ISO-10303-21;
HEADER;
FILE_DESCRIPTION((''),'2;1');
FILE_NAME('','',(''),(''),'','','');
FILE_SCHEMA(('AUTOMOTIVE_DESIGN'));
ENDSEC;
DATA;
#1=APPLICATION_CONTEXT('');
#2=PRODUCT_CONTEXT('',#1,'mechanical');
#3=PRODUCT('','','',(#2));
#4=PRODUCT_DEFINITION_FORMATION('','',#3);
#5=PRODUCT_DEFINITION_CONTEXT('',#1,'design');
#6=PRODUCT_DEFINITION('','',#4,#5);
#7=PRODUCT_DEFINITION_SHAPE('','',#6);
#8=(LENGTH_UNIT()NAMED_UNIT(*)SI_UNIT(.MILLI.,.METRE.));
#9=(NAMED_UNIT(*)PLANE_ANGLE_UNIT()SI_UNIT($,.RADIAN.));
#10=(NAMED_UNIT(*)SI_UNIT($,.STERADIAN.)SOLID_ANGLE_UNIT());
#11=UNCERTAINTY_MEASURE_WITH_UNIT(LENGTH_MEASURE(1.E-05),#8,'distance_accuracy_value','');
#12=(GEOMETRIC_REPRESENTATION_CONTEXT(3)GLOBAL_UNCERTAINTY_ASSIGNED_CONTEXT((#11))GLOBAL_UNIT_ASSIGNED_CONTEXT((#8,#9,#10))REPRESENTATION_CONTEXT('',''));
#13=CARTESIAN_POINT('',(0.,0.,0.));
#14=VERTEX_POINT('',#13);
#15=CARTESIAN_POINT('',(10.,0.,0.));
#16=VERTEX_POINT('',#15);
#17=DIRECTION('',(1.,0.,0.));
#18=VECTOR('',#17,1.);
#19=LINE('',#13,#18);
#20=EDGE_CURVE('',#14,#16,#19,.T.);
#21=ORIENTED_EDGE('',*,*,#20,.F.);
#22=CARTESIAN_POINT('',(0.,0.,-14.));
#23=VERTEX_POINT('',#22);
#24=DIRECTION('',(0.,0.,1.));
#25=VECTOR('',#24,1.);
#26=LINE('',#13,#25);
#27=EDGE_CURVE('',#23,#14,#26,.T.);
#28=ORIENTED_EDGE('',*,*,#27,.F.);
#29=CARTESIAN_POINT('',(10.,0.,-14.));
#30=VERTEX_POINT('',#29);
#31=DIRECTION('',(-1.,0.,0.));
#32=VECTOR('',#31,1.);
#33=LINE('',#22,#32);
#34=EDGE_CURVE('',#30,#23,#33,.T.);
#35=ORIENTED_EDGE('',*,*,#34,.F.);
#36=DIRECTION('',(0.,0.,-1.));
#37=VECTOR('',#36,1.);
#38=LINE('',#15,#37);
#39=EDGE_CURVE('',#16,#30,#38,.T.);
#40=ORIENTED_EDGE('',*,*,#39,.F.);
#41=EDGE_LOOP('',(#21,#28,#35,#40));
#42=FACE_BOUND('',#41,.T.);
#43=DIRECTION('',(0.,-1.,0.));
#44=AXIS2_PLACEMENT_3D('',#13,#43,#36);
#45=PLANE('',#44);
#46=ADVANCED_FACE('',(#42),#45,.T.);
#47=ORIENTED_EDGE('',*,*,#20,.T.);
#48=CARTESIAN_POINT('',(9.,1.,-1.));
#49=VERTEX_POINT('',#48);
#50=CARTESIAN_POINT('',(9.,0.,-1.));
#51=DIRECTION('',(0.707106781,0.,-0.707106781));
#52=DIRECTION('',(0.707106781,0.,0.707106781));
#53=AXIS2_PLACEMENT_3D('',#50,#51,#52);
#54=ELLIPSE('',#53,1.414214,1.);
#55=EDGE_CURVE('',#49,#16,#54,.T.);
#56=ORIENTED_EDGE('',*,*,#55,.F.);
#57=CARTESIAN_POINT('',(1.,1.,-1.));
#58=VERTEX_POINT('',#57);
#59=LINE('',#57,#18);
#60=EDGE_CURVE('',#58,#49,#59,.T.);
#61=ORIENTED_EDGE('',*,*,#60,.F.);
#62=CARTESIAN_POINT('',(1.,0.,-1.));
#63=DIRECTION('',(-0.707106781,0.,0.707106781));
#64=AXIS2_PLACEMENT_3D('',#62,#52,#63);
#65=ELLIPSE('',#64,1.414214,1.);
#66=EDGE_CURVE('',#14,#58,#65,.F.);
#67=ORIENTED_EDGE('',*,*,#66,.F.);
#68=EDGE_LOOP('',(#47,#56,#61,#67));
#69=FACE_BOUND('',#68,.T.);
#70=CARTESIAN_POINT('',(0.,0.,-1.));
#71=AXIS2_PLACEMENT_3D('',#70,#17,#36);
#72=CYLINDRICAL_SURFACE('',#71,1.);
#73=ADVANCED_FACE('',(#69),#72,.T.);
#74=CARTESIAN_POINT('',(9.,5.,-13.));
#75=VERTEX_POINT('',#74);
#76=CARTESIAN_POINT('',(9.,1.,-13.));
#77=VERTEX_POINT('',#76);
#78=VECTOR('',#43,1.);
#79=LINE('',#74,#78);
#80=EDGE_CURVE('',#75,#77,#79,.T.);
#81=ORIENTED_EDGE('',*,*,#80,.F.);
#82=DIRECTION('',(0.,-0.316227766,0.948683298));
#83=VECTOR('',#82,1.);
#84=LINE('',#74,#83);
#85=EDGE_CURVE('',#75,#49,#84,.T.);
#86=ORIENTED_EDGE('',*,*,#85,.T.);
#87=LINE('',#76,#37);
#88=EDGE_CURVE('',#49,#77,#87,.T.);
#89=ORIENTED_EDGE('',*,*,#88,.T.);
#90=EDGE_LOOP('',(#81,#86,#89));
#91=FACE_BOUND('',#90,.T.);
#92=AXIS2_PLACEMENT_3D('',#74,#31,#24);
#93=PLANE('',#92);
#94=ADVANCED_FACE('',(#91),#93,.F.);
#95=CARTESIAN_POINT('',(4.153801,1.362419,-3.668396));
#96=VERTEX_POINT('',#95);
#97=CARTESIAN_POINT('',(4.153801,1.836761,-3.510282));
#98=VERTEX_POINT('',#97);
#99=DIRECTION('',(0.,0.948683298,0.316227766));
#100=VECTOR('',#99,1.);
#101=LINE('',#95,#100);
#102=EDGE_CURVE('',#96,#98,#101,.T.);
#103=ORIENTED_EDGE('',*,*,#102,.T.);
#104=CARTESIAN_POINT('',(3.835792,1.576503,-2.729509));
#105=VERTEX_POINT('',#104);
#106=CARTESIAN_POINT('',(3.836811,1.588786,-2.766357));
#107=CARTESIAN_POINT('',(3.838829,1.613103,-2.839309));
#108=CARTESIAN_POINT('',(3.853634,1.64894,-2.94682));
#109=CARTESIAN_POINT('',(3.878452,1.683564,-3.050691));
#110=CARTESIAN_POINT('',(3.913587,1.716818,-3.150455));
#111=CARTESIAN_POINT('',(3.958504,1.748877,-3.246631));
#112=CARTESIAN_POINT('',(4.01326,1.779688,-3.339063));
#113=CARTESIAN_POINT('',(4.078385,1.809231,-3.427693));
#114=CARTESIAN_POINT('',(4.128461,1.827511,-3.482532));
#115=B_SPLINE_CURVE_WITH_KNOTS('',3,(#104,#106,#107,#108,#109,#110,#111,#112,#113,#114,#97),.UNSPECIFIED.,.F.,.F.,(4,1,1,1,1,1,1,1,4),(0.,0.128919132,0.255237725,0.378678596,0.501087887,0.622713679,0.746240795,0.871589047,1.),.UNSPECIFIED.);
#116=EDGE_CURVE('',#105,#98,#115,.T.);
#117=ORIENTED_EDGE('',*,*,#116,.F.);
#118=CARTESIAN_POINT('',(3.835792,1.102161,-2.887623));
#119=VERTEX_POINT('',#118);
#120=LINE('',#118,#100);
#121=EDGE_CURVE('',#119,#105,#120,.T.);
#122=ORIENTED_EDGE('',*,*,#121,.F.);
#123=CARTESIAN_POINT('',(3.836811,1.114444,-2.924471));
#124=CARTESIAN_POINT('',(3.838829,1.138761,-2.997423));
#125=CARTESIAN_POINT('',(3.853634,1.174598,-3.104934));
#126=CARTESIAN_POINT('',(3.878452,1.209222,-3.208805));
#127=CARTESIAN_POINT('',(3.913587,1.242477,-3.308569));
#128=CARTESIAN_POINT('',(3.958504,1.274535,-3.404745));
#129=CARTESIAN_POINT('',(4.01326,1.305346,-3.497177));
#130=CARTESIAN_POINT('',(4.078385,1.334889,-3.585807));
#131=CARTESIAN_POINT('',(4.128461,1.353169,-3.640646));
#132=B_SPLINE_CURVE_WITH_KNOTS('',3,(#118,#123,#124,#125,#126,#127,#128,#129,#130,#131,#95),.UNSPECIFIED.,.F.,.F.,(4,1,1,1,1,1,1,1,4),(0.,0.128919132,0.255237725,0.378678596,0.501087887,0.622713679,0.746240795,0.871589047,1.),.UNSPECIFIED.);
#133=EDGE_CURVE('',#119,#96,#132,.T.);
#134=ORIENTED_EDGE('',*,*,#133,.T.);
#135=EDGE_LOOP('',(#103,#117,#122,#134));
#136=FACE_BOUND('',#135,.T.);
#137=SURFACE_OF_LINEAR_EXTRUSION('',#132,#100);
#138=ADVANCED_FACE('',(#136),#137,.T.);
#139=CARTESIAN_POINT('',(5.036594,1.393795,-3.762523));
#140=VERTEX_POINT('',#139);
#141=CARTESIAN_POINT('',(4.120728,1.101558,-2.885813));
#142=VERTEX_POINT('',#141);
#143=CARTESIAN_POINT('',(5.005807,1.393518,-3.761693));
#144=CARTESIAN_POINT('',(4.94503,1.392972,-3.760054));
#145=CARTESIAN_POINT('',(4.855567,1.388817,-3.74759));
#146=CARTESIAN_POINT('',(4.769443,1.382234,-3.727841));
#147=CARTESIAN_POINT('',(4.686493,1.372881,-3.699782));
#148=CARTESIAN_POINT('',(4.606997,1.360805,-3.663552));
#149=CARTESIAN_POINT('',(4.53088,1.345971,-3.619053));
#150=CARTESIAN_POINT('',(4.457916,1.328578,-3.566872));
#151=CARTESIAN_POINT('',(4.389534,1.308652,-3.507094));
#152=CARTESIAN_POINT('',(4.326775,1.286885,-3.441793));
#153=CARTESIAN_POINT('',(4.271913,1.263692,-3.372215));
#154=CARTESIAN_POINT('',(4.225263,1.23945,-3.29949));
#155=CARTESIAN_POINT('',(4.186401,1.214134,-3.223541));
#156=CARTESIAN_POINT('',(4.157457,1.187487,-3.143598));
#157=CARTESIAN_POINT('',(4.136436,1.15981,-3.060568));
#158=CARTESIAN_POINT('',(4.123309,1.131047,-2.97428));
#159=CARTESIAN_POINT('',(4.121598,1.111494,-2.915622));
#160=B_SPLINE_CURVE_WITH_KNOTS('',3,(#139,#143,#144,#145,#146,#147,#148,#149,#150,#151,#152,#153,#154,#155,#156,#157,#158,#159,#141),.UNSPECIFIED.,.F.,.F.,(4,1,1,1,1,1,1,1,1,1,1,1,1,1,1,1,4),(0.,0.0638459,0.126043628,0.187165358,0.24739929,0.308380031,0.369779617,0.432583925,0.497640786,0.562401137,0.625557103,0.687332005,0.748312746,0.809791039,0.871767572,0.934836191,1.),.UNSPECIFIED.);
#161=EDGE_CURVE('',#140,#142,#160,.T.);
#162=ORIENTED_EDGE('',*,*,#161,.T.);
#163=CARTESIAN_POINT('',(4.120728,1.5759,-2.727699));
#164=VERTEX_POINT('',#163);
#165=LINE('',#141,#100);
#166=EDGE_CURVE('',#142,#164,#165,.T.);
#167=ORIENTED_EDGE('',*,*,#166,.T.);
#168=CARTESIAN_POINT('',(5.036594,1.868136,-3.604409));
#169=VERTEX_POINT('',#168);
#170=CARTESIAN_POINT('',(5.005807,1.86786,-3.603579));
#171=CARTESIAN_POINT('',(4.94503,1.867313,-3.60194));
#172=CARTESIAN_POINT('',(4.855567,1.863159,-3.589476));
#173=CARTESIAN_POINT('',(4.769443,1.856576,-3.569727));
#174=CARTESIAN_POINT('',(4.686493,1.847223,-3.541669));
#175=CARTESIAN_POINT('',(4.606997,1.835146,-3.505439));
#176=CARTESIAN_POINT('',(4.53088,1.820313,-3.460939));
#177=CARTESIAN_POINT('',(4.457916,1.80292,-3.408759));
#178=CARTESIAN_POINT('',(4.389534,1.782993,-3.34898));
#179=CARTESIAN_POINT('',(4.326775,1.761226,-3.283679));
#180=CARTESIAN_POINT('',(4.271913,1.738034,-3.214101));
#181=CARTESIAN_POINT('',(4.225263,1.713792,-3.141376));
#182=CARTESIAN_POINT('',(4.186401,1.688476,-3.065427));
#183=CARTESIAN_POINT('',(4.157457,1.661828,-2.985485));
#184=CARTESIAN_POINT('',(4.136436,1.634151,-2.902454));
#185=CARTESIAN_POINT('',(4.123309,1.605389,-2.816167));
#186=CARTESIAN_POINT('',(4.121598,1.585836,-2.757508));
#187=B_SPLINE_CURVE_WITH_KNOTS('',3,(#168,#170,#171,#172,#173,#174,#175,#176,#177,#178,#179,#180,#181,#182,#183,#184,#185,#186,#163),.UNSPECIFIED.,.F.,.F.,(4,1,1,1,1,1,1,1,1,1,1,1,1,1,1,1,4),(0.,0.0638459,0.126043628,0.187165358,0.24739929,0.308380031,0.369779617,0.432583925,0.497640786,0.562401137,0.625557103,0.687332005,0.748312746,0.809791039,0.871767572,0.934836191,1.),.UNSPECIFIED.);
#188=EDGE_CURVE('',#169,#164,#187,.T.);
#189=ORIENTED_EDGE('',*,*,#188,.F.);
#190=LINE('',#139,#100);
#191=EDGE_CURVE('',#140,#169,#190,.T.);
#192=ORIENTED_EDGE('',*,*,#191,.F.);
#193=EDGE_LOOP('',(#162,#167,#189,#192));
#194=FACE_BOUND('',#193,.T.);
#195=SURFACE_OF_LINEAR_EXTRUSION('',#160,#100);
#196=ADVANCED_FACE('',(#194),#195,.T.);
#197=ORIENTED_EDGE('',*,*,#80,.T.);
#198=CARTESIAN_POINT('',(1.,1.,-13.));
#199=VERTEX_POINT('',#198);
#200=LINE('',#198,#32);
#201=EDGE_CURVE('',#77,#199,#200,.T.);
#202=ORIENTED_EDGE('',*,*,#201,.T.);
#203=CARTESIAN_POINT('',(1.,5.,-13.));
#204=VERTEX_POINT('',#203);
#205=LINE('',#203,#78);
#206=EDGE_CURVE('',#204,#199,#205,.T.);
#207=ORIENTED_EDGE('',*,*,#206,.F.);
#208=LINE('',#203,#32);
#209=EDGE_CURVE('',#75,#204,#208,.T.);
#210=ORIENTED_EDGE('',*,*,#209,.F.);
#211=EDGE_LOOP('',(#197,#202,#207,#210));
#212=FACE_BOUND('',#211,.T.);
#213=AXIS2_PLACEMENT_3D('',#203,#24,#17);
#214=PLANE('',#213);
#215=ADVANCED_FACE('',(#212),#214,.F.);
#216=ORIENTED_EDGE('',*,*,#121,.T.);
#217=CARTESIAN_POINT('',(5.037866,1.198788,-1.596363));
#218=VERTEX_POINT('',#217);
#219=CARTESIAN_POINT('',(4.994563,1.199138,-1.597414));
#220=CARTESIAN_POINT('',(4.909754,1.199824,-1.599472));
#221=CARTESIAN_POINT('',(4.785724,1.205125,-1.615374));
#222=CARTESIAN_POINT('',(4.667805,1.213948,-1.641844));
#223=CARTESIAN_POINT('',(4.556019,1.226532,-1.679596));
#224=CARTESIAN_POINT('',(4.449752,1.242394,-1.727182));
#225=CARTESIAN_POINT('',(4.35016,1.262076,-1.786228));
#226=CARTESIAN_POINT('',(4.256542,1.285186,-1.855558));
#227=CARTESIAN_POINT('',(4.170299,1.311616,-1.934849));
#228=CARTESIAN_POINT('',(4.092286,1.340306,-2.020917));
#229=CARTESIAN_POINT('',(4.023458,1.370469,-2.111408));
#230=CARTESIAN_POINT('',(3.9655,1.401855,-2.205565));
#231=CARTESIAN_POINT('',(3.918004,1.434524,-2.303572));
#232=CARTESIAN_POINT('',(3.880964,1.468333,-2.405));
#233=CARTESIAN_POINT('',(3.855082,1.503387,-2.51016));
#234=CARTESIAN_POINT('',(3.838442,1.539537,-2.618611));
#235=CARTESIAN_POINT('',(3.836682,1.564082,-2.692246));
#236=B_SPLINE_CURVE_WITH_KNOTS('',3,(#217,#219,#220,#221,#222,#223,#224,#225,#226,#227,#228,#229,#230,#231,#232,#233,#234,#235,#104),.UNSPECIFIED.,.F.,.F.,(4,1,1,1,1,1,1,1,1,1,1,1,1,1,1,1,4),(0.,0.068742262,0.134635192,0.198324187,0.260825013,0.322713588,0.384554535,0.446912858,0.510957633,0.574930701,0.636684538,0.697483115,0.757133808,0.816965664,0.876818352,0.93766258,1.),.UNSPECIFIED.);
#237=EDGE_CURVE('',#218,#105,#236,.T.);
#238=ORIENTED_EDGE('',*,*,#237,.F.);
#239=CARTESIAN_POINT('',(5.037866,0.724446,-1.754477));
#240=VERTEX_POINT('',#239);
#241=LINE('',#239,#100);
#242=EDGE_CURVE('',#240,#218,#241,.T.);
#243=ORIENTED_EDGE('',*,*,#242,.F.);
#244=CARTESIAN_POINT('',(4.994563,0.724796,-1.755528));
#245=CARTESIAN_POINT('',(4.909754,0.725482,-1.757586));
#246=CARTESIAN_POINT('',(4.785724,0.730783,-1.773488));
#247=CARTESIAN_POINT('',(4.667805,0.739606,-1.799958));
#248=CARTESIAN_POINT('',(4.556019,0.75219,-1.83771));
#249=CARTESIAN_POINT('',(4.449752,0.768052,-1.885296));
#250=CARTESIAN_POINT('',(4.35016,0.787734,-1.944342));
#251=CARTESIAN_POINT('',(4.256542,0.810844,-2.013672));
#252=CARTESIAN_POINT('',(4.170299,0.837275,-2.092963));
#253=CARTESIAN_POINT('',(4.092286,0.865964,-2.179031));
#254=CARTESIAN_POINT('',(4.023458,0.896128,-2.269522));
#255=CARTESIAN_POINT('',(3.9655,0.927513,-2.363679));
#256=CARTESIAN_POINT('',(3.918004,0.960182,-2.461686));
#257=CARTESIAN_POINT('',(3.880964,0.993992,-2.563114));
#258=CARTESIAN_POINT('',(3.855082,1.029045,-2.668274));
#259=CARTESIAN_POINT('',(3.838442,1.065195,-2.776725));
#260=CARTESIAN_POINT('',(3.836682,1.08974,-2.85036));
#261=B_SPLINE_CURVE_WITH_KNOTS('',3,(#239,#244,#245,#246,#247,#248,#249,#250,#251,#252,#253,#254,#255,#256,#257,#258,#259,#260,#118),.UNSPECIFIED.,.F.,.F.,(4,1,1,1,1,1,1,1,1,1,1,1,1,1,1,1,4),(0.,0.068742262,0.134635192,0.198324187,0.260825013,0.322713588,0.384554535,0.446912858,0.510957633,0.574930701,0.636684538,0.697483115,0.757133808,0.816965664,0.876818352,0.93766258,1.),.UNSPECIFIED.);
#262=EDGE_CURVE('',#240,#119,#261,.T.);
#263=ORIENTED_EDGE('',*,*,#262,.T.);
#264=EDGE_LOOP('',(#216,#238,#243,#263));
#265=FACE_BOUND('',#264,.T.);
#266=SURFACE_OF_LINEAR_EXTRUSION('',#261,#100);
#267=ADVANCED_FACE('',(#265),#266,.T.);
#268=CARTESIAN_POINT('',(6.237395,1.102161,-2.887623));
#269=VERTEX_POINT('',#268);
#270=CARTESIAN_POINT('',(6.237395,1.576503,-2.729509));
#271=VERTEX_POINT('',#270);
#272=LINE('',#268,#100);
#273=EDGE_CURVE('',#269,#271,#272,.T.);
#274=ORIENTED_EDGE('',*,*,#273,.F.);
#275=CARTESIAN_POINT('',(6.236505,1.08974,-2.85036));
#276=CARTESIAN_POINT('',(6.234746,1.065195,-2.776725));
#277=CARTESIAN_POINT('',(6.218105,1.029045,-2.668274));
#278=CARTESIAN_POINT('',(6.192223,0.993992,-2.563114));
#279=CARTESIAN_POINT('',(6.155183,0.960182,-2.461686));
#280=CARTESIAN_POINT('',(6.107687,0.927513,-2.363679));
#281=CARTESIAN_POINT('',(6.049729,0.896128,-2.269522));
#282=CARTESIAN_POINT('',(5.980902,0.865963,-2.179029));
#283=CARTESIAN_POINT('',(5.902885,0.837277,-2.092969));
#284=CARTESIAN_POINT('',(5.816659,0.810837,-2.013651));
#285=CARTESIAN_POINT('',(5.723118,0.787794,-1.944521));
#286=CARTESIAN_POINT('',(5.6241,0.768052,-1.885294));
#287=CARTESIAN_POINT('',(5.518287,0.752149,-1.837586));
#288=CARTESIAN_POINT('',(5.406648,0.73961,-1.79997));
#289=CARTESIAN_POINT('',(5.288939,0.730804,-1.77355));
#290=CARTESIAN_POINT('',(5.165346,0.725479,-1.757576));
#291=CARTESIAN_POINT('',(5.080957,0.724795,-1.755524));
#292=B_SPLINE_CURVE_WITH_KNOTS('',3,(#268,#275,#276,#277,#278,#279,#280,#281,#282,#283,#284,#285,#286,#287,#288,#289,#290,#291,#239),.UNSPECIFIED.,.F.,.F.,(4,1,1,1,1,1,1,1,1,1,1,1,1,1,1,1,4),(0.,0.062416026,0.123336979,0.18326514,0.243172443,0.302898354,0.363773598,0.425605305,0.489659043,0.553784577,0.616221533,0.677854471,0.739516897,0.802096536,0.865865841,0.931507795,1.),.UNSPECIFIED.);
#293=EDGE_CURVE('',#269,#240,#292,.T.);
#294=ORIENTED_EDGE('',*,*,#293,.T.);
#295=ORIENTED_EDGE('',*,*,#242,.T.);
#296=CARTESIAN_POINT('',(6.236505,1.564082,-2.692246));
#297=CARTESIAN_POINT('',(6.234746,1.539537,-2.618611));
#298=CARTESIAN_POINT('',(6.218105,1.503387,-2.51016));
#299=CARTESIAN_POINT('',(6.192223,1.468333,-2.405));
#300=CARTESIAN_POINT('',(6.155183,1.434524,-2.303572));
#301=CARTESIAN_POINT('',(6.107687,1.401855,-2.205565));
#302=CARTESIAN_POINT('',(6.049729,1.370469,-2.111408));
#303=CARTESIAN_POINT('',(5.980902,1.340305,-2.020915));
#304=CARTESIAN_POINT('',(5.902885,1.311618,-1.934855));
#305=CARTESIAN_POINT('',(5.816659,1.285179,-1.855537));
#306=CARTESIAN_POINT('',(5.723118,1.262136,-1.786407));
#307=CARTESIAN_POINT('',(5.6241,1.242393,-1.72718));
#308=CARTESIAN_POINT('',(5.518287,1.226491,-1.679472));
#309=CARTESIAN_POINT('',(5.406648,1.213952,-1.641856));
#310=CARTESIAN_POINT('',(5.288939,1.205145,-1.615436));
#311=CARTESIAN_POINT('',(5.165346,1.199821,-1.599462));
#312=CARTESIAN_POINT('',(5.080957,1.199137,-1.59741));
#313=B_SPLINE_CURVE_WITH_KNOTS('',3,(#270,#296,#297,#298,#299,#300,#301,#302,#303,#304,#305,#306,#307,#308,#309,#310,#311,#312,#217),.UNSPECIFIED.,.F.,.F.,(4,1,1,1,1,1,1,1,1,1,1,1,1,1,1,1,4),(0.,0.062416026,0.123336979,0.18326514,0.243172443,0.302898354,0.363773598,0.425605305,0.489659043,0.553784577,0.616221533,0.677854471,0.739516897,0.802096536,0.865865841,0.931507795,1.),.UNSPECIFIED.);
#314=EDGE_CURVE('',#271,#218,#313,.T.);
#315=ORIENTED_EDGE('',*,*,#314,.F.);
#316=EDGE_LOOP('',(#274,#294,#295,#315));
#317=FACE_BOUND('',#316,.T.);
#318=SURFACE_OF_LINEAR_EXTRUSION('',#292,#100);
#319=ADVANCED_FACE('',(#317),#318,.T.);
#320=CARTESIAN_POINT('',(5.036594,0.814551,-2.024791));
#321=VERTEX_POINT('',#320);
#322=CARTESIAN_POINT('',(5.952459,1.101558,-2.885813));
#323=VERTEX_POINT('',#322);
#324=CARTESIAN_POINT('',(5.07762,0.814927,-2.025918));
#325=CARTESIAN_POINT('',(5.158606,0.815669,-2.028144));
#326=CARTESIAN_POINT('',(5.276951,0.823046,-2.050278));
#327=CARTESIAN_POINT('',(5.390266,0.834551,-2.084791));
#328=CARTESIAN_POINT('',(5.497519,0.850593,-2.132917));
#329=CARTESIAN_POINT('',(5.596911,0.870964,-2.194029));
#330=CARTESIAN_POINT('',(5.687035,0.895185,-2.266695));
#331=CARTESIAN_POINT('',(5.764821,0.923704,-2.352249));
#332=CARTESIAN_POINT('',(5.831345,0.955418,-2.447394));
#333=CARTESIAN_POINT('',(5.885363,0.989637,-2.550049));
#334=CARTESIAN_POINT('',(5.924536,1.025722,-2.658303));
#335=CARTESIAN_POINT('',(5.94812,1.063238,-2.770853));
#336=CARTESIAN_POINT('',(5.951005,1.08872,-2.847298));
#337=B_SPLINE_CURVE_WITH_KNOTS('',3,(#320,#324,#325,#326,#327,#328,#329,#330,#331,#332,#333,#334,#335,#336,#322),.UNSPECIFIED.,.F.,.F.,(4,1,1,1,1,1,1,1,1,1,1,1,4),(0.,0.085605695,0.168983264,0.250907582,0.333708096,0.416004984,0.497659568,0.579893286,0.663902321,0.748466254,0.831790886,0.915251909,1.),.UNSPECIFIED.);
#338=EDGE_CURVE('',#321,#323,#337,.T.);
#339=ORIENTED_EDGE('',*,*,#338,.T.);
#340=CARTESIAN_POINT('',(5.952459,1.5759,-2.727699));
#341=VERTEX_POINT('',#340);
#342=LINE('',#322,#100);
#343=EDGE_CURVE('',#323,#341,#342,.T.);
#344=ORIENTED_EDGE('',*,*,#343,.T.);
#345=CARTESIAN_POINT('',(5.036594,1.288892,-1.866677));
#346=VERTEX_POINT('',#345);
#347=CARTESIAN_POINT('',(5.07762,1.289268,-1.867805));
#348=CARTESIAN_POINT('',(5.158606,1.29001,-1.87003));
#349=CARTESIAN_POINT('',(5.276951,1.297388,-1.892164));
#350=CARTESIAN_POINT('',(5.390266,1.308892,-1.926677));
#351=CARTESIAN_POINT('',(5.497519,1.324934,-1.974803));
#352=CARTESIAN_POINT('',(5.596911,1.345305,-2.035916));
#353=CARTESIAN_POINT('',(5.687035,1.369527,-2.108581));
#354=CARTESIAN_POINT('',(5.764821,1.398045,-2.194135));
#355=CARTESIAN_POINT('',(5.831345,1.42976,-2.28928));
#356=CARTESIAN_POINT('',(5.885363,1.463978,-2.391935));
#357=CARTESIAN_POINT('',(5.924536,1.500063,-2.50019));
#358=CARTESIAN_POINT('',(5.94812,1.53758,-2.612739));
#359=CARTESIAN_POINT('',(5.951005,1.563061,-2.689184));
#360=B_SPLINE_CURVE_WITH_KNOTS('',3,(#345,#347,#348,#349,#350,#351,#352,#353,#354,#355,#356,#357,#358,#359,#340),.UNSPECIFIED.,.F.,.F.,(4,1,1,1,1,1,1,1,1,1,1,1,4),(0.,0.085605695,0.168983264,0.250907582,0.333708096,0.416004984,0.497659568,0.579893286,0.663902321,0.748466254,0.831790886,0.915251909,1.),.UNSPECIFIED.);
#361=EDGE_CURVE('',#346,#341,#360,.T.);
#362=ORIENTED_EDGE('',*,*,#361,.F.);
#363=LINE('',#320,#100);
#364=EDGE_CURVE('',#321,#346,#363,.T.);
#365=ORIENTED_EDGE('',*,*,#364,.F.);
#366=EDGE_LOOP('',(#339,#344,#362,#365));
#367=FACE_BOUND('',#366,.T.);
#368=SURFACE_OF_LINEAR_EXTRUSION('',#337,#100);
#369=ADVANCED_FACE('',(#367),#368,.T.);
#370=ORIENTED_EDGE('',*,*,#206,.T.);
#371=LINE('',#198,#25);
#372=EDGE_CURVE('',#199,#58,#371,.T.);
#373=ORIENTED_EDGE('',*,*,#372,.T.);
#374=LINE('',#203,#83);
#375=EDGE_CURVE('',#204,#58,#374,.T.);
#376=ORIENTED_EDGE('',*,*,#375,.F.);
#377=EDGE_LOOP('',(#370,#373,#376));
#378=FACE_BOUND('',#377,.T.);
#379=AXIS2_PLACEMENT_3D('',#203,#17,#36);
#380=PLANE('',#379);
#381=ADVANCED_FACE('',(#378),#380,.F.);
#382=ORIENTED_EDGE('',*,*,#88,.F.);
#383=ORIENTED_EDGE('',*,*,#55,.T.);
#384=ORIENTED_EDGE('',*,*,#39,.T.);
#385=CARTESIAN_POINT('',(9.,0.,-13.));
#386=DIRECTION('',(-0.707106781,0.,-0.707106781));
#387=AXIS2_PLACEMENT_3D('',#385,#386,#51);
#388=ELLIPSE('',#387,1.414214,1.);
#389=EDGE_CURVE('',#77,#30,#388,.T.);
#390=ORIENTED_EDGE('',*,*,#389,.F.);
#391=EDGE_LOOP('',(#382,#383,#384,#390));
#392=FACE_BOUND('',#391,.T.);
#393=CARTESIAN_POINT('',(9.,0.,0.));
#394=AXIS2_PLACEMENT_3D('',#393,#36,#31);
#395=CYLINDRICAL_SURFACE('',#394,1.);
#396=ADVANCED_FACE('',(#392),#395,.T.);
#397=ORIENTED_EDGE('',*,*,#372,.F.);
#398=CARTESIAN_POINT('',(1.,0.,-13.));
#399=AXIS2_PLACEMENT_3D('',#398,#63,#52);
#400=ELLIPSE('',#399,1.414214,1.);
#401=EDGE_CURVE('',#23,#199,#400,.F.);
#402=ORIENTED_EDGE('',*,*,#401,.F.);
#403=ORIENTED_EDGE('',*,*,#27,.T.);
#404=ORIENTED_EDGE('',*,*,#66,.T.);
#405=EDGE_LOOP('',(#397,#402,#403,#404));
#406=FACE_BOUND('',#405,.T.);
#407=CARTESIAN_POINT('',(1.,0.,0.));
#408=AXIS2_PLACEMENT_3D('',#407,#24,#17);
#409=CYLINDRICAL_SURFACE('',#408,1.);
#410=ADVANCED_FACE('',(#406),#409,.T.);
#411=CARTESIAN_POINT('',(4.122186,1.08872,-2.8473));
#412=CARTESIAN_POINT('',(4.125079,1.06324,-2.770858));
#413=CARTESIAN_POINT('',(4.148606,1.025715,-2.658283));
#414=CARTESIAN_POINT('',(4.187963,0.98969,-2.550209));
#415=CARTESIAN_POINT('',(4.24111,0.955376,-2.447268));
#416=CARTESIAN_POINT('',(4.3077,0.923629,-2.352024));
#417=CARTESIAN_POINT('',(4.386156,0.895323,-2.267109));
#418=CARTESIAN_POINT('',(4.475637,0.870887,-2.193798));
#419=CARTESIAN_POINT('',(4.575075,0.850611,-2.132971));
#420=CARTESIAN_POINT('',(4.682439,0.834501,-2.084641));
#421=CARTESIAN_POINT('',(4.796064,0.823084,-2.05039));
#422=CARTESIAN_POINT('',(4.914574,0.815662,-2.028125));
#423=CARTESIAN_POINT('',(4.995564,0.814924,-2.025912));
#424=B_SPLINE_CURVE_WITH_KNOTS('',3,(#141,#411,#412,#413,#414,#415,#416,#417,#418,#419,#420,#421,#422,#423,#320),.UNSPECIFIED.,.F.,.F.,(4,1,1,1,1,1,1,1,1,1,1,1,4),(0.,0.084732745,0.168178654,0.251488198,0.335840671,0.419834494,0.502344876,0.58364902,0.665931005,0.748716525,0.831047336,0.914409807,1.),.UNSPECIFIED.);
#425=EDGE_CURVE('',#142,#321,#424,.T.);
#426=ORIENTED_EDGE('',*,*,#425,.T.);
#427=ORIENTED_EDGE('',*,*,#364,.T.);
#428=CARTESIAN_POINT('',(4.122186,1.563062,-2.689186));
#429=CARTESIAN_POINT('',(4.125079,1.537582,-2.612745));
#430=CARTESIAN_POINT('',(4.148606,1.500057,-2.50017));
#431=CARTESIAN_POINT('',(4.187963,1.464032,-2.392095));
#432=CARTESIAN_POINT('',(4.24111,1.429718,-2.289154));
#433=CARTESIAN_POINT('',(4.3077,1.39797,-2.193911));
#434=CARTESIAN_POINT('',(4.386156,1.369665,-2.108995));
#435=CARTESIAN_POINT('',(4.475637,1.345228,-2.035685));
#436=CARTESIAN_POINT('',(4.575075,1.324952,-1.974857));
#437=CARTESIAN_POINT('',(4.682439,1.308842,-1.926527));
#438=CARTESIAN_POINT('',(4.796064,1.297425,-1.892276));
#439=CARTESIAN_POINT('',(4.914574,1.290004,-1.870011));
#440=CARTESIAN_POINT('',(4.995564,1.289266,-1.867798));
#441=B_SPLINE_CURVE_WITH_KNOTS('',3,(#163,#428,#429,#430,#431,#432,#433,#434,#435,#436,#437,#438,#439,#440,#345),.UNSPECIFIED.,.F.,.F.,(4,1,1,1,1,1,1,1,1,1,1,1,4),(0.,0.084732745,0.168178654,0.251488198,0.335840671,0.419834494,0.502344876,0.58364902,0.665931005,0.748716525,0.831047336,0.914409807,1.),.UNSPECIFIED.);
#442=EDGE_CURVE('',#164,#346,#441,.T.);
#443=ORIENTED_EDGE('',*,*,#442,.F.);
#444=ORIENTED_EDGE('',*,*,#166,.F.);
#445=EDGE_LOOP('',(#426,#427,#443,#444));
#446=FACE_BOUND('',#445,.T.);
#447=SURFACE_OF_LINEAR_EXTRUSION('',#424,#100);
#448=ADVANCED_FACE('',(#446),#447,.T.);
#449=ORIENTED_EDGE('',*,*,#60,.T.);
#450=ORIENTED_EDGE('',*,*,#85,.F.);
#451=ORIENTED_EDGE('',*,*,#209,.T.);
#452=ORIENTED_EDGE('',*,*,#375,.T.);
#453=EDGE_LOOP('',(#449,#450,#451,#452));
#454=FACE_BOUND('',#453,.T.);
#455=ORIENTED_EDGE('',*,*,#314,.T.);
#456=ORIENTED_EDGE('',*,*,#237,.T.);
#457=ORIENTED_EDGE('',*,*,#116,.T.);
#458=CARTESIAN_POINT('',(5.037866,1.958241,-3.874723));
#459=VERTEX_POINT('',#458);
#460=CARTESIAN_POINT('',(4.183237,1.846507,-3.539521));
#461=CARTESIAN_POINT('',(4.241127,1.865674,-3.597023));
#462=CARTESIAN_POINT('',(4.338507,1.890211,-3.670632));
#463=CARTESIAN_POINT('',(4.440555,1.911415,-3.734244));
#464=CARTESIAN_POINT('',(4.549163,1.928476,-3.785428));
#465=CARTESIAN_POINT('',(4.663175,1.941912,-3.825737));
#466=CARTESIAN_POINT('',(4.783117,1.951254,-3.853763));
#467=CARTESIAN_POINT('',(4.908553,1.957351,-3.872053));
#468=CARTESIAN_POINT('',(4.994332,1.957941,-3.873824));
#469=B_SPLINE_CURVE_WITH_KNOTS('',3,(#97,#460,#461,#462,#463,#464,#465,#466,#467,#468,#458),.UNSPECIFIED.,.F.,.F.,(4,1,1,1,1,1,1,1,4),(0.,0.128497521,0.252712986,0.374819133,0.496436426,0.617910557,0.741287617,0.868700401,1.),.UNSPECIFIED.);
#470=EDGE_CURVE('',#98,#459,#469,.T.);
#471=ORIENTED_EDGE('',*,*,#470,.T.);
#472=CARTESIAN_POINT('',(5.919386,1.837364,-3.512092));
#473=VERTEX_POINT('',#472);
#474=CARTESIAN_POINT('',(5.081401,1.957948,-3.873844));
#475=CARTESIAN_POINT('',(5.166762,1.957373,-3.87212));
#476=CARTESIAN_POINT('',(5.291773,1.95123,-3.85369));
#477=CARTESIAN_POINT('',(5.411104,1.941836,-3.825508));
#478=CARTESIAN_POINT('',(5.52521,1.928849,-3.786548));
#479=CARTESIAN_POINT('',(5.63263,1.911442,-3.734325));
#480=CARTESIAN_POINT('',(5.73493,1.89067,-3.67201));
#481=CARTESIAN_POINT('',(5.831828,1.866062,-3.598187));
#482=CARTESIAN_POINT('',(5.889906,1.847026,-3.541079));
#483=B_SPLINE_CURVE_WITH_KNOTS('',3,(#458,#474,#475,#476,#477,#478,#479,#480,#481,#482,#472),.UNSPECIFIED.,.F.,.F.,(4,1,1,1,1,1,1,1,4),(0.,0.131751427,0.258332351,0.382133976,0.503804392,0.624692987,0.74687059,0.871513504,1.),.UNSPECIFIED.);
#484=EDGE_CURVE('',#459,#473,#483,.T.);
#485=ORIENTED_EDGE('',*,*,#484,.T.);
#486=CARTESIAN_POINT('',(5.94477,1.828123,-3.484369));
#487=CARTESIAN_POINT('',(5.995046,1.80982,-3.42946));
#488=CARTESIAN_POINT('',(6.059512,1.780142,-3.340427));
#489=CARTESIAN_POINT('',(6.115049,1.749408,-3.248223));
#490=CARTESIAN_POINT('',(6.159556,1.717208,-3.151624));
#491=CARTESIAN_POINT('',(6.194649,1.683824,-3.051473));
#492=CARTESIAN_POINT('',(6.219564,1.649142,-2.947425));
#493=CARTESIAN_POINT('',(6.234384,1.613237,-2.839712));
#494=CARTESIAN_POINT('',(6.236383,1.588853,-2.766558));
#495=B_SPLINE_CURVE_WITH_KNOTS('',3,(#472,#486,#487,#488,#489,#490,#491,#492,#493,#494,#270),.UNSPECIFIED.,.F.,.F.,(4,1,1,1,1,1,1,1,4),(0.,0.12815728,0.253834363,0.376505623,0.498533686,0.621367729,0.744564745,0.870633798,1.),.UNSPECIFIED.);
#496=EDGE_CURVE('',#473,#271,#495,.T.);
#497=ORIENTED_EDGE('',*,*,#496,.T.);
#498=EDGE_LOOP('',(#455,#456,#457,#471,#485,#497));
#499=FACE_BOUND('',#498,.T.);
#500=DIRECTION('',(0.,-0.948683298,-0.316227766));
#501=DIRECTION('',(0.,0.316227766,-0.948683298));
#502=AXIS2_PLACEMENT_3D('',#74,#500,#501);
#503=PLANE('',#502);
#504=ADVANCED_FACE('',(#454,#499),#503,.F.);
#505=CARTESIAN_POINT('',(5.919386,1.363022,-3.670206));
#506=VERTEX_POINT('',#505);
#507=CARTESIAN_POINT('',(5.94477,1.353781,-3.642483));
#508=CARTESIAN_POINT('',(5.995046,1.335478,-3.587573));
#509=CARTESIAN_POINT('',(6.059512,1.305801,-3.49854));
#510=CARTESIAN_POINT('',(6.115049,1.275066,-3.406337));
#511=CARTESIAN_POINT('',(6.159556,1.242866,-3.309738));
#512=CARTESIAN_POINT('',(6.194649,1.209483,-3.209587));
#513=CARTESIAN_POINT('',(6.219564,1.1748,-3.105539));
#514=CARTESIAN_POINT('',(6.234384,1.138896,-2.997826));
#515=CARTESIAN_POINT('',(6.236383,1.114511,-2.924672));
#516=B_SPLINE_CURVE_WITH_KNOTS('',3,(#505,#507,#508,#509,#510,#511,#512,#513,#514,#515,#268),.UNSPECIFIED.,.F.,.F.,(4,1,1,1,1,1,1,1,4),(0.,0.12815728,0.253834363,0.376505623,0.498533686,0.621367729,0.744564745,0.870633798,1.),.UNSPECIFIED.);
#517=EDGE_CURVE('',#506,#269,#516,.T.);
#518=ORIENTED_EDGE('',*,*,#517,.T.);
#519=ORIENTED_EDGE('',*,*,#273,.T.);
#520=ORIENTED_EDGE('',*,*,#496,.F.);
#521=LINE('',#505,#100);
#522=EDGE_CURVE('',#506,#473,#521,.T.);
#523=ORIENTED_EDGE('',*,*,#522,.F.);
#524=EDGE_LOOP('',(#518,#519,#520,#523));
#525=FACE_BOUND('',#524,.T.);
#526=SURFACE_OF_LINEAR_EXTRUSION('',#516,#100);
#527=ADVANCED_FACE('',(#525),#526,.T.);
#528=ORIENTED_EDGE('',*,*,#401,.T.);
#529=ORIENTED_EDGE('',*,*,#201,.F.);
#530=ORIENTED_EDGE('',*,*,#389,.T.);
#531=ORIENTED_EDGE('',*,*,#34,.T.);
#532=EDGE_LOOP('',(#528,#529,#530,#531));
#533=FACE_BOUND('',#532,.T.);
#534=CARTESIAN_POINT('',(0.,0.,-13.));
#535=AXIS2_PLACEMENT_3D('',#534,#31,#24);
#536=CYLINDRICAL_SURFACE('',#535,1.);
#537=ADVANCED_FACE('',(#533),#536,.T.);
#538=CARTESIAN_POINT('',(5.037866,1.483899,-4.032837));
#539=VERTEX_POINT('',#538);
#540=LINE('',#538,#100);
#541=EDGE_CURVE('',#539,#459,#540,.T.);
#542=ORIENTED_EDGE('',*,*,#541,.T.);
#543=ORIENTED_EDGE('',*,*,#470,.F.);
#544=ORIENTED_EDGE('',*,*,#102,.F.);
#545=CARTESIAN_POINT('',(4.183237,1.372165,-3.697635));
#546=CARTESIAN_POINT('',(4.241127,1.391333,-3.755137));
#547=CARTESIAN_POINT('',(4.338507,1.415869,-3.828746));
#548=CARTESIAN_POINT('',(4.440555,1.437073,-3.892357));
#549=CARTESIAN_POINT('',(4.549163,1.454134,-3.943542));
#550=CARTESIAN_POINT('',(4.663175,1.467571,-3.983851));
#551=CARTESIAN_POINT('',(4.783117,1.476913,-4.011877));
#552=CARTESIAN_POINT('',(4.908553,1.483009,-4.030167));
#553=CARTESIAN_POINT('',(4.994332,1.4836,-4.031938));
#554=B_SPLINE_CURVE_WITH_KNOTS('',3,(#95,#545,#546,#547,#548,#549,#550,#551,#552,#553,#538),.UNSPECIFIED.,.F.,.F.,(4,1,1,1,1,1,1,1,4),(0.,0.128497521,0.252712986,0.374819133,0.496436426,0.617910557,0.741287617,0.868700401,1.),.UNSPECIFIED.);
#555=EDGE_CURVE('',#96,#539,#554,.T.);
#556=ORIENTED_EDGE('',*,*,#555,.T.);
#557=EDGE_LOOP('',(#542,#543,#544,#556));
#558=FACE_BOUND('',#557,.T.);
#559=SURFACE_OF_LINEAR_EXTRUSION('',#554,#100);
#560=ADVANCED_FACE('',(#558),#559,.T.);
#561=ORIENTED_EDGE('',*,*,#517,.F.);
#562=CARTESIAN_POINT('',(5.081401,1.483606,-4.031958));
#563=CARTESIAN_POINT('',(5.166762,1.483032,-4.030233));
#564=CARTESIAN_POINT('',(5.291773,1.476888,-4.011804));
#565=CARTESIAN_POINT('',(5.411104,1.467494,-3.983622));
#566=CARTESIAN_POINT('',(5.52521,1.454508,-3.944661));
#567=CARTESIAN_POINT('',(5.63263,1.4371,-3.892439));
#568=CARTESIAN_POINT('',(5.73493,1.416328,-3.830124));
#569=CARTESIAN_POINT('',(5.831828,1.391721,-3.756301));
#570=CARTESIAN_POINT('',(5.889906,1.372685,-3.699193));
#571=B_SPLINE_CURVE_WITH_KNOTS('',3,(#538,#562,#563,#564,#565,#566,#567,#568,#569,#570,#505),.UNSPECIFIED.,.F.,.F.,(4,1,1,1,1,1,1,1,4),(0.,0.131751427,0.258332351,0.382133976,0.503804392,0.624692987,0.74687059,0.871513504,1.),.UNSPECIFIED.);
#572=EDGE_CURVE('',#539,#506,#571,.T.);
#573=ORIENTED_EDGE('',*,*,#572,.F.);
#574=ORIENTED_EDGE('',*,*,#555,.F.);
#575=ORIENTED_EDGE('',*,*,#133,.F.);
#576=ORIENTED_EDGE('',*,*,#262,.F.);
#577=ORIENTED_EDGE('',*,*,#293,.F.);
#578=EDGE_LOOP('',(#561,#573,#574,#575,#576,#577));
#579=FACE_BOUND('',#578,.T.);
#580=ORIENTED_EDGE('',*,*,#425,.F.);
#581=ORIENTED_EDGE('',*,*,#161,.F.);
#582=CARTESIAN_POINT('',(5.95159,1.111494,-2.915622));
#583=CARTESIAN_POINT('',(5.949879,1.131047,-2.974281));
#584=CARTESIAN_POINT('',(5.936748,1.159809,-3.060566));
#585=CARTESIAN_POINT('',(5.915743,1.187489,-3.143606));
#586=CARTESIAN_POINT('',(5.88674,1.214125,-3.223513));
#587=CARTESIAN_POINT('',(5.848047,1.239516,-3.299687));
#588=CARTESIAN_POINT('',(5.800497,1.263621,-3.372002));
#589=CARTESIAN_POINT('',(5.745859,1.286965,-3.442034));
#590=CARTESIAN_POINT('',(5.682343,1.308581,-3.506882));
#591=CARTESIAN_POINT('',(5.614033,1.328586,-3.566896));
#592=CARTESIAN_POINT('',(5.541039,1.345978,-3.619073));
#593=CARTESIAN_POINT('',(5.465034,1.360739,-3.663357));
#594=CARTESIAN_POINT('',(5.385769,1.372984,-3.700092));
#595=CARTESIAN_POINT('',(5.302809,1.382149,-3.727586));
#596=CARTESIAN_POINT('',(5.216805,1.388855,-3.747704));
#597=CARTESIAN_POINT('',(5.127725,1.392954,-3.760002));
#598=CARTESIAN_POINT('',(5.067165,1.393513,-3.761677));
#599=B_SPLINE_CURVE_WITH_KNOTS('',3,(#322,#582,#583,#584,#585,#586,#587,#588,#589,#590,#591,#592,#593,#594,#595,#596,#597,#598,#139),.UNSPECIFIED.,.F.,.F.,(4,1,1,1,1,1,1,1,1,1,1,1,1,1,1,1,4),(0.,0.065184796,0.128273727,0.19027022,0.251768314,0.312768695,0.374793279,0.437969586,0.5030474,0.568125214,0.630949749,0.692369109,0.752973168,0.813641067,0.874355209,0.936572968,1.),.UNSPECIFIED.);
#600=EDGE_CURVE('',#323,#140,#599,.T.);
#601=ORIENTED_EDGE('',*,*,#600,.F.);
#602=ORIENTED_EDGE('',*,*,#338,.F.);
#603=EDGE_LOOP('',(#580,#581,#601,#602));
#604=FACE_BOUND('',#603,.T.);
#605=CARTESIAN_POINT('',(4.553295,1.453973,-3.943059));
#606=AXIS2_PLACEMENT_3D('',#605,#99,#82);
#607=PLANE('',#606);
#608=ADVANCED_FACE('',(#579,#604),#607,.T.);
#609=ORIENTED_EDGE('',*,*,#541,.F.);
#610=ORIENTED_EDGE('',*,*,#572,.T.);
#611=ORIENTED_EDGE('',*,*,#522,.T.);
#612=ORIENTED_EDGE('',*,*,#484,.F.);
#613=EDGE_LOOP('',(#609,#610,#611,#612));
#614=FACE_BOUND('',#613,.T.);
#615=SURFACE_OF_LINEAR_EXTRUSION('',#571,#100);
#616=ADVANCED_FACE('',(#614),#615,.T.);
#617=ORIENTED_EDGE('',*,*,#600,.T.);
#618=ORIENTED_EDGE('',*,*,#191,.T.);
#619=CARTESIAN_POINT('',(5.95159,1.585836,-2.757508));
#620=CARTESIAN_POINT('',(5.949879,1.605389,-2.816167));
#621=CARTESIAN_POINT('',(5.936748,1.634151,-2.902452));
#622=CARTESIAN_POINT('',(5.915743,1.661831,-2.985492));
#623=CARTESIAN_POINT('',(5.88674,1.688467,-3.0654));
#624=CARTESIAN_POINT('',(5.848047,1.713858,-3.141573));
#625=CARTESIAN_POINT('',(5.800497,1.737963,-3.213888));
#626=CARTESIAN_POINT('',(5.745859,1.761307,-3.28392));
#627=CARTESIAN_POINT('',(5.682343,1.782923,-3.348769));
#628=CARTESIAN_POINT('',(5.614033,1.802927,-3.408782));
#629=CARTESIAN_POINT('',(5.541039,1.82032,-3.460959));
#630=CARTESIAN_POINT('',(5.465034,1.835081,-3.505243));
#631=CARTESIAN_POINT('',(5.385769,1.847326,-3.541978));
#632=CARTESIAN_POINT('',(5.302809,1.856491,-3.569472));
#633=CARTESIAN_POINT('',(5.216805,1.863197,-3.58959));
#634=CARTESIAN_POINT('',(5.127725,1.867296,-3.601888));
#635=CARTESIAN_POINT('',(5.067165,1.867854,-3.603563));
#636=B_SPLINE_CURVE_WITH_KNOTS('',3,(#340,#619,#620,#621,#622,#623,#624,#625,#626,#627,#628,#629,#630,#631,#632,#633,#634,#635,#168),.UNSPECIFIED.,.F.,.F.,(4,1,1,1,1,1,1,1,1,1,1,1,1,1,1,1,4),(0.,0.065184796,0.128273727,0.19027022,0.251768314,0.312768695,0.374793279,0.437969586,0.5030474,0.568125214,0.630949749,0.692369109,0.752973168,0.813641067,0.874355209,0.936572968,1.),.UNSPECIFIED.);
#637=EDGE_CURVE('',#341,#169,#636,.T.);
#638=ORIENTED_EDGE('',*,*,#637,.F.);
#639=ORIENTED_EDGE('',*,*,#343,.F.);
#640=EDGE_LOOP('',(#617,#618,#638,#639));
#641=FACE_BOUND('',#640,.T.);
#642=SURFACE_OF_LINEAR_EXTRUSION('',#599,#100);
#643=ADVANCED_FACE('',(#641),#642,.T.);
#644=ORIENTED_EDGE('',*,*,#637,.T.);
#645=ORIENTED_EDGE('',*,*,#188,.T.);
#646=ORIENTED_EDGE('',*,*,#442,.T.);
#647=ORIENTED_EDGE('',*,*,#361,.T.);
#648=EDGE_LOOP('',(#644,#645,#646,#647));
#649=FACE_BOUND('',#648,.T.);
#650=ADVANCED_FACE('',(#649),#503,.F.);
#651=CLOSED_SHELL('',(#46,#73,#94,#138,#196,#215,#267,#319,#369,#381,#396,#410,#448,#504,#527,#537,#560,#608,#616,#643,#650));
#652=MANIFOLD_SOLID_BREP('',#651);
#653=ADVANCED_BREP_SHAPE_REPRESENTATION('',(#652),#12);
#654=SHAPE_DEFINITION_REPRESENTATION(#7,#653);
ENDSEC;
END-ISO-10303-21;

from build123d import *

# Parameters (mm, degrees)
SKETCH1_W           = 10
SKETCH1_H           = 14
BOSS_EXTRUDE1_DEPTH = 1
SKETCH2_W           = 8
SKETCH2_H           = 12
BOSS_EXTRUDE2_DEPTH = 4
CUT_EXTRUDE1_DEPTH  = 8
CUT_EXTRUDE2_DEPTH  = 0.5
FILLET1_R           = 1


with BuildPart() as part:
    # Sketch1 → Boss-Extrude1 (new body)
    with BuildSketch(Plane(origin=(0, 0, 0), x_dir=(1, 0, 0), z_dir=(0, 1, 0))):
        with Locations((5, 7)):
            Rectangle(SKETCH1_W, SKETCH1_H)
    extrude(amount=BOSS_EXTRUDE1_DEPTH)

    # Sketch2 → Boss-Extrude2 (add)
    with BuildSketch(Plane(origin=(0, 1, 0), x_dir=(1, 0, 0), z_dir=(0, 1, 0))):
        with Locations((5, 7)):
            Rectangle(SKETCH2_W, SKETCH2_H)
    extrude(amount=BOSS_EXTRUDE2_DEPTH)

    # Sketch3 → Cut-Extrude1 (cut)
    with BuildSketch(Plane.ZY.offset(-1)):
        Polygon((-13, 5), (-1, 1), (-1, 5), align=None)
    extrude(amount=-CUT_EXTRUDE1_DEPTH, mode=Mode.SUBTRACT)

    # Sketch4 → Cut-Extrude2 (cut)
    with BuildSketch(Plane(origin=(0, 0.6, 0.2), x_dir=(1, 0, 0), z_dir=(0, 0.9486832980505139, 0.3162277660168379))):
        with BuildLine():
            add(Edge.make_bspline(
                [(5.03786558, 4.295135467), (5.08140052, 4.294208466), (5.166761899, 4.292390843), (5.291773338, 4.27296441), (5.411103569, 4.243257872), (5.525209614, 4.202190098), (5.632630111, 4.1471429), (5.73492974, 4.081457329), (5.831828026, 4.003640262), (5.88990606, 3.943444014), (5.919386013, 3.912888873)],
                knots=[0, 0, 0, 0, 1.054011418, 2.066658804, 3.057071809, 4.030435133, 4.997543892, 5.974964718, 6.972108034, 8, 8, 8, 8], degree=3))
            add(Edge.make_bspline(
                [(5.919386013, 3.912888873), (5.944769642, 3.883666186), (5.995045659, 3.825786351), (6.059512418, 3.73193733), (6.115049119, 3.634745954), (6.159556233, 3.532921593), (6.194649076, 3.427353141), (6.219564387, 3.317677745), (6.23438432, 3.204137616), (6.236382726, 3.127026992), (6.237394827, 3.087974009)],
                knots=[0, 0, 0, 0, 1.025258237, 2.030674902, 3.01204498, 3.988269485, 4.97094183, 5.956517959, 6.965070386, 8, 8, 8, 8], degree=3))
            add(Edge.make_bspline(
                [(6.237394827, 3.087974009), (6.236504614, 3.048694671), (6.234745511, 2.971076867), (6.21810523, 2.856759299), (6.192223459, 2.745911139), (6.155183149, 2.638996467), (6.107686864, 2.535688473), (6.049728883, 2.436438382), (5.980902488, 2.341050376), (5.902884577, 2.250334422), (5.816658946, 2.166726499), (5.723117869, 2.093857283), (5.624099567, 2.031426329), (5.518287382, 1.98113758), (5.40664759, 1.941486638), (5.288939393, 1.913637337), (5.16534565, 1.896799238), (5.080956671, 1.894636997), (5.03786558, 1.893532903)],
                knots=[0, 0, 0, 0, 0.998656419, 1.973391657, 2.932242238, 3.890759089, 4.846373663, 5.82037756, 6.809684879, 7.83454468, 8.860553229, 9.859544525, 10.845671541, 11.83227036, 12.833544569, 13.85385346, 14.904124723, 16, 16, 16, 16], degree=3))
            add(Edge.make_bspline(
                [(5.03786558, 1.893532903), (4.99456337, 1.894640703), (4.909753804, 1.896810384), (4.785723807, 1.913571919), (4.667804652, 1.941473803), (4.556018709, 1.981267886), (4.449751598, 2.031427936), (4.350159562, 2.09366854), (4.256542495, 2.166748109), (4.170298624, 2.250328567), (4.092285603, 2.341051884), (4.023457946, 2.436437991), (3.965500293, 2.535688575), (3.918003922, 2.63899644), (3.880963635, 2.745911146), (3.855081858, 2.856759298), (3.838441579, 2.971076868), (3.836682476, 3.048694671), (3.835792263, 3.087974009)],
                knots=[0, 0, 0, 0, 1.099876186, 2.154163076, 3.173186993, 4.173200201, 5.163417411, 6.152872554, 7.150605724, 8.17532212, 9.198891216, 10.186952605, 11.159729845, 12.11414092, 13.071450619, 14.029093627, 15.002601286, 16, 16, 16, 16], degree=3))
            add(Edge.make_bspline(
                [(3.835792263, 3.087974009), (3.836811266, 3.126814733), (3.838828716, 3.203712691), (3.853633749, 3.317039381), (3.878451869, 3.426529156), (3.913586778, 3.531690123), (3.95850413, 3.633068269), (4.013260441, 3.730499794), (4.078384801, 3.823924442), (4.128460857, 3.881729471), (4.153801077, 3.91098082)],
                knots=[0, 0, 0, 0, 1.031353054, 2.041901799, 3.029428768, 4.008703097, 4.981709435, 5.96992636, 6.972712378, 8, 8, 8, 8], degree=3))
            add(Edge.make_bspline(
                [(4.153801077, 3.91098082), (4.183236584, 3.941800943), (4.241126689, 4.002414139), (4.338507321, 4.080004357), (4.440555287, 4.147056796), (4.549162899, 4.20101022), (4.663175206, 4.243499447), (4.783116947, 4.273041021), (4.908552593, 4.29232085), (4.994331678, 4.294187911), (5.03786558, 4.295135467)],
                knots=[0, 0, 0, 0, 1.027980169, 2.021703884, 2.998553061, 3.971491411, 4.943284454, 5.930300938, 6.949603206, 8, 8, 8, 8], degree=3))
        make_face()
        with BuildLine():
            add(Edge.make_bspline(
                [(5.036593545, 4.01019957), (5.005807283, 4.009324547), (4.945029502, 4.007597091), (4.85556745, 3.99445812), (4.769443168, 3.973641456), (4.686493259, 3.944064919), (4.606997453, 3.905875204), (4.530879638, 3.858968334), (4.457915924, 3.803965581), (4.389533624, 3.740953014), (4.326775384, 3.672119926), (4.271913219, 3.598778915), (4.225263301, 3.522119587), (4.186401157, 3.442062224), (4.157456779, 3.357795534), (4.136435537, 3.270273819), (4.123308962, 3.179318762), (4.121597747, 3.117486981), (4.12072816, 3.086065956)],
                knots=[0, 0, 0, 0, 1.021534396, 2.016698045, 2.994645724, 3.958388632, 4.93408049, 5.916473867, 6.921342795, 7.962252576, 8.998418191, 10.008913653, 10.997312074, 11.973003931, 12.956656626, 13.948281152, 14.957379055, 16, 16, 16, 16], degree=3))
            add(Edge.make_bspline(
                [(4.12072816, 3.086065956), (4.122185779, 3.045469474), (4.125078879, 2.964893049), (4.148605843, 2.846228674), (4.187963397, 2.732307994), (4.24111043, 2.623798843), (4.307700357, 2.523403277), (4.386156481, 2.433894145), (4.475636781, 2.356618444), (4.575074606, 2.29250082), (4.68243888, 2.241555899), (4.796064257, 2.205452542), (4.91457403, 2.181983221), (4.995564407, 2.179650527), (5.036593545, 2.178468801)],
                knots=[0, 0, 0, 0, 1.016792936, 2.018143844, 3.017858371, 4.030088057, 5.03801393, 6.028138512, 7.003788237, 7.991172063, 8.984598303, 9.972568034, 10.972917682, 12, 12, 12, 12], degree=3))
            add(Edge.make_bspline(
                [(5.036593545, 2.178468801), (5.077620322, 2.179657412), (5.158606041, 2.182003698), (5.276951152, 2.205334341), (5.390265969, 2.241714091), (5.497518728, 2.292443524), (5.596911289, 2.356861929), (5.687035135, 2.433457785), (5.764821375, 2.52364035), (5.831345431, 2.623931823), (5.885362834, 2.732139771), (5.924536167, 2.846249699), (5.948119691, 2.964887694), (5.951005157, 3.04546768), (5.952458929, 3.086065956)],
                knots=[0, 0, 0, 0, 1.02726834, 2.027799167, 3.010890988, 4.004497153, 4.992059811, 5.971914811, 6.958719428, 7.966827853, 8.981595046, 9.981490638, 10.983022906, 12, 12, 12, 12], degree=3))
            add(Edge.make_bspline(
                [(5.952458929, 3.086065956), (5.951589641, 3.117487169), (5.949879016, 3.179319319), (5.936748155, 3.270271688), (5.915742773, 3.357803351), (5.886739949, 3.442033382), (5.848046665, 3.522326868), (5.800497145, 3.598553835), (5.745859001, 3.672373988), (5.68234347, 3.740730505), (5.614032548, 3.803990145), (5.541039264, 3.858989662), (5.465034319, 3.905669053), (5.385769462, 3.944391571), (5.302808918, 3.973372372), (5.216805308, 3.994578317), (5.127724959, 4.007541566), (5.06716497, 4.009307902), (5.036593545, 4.01019957)],
                knots=[0, 0, 0, 0, 1.042956736, 2.052379634, 3.044323526, 4.02829302, 5.004299113, 5.996692471, 7.007513377, 8.048758398, 9.090003419, 10.095195979, 11.07790575, 12.047570684, 13.018257071, 13.989683339, 14.985167495, 16, 16, 16, 16], degree=3))
        make_face(mode=Mode.SUBTRACT)
    extrude(amount=-CUT_EXTRUDE2_DEPTH, mode=Mode.SUBTRACT)

    # Fillet1
    fillet1_edges = [part.edges().sort_by_distance(p)[0] for p in [
        (5, 1, -14),
        (10, 1, -7),
        (5, 1, 0),
        (0, 1, -7),
    ]]
    fillet(fillet1_edges, radius=FILLET1_R - 0.0001)  # a hair under: the kernel refuses the full size


solid = part.part
